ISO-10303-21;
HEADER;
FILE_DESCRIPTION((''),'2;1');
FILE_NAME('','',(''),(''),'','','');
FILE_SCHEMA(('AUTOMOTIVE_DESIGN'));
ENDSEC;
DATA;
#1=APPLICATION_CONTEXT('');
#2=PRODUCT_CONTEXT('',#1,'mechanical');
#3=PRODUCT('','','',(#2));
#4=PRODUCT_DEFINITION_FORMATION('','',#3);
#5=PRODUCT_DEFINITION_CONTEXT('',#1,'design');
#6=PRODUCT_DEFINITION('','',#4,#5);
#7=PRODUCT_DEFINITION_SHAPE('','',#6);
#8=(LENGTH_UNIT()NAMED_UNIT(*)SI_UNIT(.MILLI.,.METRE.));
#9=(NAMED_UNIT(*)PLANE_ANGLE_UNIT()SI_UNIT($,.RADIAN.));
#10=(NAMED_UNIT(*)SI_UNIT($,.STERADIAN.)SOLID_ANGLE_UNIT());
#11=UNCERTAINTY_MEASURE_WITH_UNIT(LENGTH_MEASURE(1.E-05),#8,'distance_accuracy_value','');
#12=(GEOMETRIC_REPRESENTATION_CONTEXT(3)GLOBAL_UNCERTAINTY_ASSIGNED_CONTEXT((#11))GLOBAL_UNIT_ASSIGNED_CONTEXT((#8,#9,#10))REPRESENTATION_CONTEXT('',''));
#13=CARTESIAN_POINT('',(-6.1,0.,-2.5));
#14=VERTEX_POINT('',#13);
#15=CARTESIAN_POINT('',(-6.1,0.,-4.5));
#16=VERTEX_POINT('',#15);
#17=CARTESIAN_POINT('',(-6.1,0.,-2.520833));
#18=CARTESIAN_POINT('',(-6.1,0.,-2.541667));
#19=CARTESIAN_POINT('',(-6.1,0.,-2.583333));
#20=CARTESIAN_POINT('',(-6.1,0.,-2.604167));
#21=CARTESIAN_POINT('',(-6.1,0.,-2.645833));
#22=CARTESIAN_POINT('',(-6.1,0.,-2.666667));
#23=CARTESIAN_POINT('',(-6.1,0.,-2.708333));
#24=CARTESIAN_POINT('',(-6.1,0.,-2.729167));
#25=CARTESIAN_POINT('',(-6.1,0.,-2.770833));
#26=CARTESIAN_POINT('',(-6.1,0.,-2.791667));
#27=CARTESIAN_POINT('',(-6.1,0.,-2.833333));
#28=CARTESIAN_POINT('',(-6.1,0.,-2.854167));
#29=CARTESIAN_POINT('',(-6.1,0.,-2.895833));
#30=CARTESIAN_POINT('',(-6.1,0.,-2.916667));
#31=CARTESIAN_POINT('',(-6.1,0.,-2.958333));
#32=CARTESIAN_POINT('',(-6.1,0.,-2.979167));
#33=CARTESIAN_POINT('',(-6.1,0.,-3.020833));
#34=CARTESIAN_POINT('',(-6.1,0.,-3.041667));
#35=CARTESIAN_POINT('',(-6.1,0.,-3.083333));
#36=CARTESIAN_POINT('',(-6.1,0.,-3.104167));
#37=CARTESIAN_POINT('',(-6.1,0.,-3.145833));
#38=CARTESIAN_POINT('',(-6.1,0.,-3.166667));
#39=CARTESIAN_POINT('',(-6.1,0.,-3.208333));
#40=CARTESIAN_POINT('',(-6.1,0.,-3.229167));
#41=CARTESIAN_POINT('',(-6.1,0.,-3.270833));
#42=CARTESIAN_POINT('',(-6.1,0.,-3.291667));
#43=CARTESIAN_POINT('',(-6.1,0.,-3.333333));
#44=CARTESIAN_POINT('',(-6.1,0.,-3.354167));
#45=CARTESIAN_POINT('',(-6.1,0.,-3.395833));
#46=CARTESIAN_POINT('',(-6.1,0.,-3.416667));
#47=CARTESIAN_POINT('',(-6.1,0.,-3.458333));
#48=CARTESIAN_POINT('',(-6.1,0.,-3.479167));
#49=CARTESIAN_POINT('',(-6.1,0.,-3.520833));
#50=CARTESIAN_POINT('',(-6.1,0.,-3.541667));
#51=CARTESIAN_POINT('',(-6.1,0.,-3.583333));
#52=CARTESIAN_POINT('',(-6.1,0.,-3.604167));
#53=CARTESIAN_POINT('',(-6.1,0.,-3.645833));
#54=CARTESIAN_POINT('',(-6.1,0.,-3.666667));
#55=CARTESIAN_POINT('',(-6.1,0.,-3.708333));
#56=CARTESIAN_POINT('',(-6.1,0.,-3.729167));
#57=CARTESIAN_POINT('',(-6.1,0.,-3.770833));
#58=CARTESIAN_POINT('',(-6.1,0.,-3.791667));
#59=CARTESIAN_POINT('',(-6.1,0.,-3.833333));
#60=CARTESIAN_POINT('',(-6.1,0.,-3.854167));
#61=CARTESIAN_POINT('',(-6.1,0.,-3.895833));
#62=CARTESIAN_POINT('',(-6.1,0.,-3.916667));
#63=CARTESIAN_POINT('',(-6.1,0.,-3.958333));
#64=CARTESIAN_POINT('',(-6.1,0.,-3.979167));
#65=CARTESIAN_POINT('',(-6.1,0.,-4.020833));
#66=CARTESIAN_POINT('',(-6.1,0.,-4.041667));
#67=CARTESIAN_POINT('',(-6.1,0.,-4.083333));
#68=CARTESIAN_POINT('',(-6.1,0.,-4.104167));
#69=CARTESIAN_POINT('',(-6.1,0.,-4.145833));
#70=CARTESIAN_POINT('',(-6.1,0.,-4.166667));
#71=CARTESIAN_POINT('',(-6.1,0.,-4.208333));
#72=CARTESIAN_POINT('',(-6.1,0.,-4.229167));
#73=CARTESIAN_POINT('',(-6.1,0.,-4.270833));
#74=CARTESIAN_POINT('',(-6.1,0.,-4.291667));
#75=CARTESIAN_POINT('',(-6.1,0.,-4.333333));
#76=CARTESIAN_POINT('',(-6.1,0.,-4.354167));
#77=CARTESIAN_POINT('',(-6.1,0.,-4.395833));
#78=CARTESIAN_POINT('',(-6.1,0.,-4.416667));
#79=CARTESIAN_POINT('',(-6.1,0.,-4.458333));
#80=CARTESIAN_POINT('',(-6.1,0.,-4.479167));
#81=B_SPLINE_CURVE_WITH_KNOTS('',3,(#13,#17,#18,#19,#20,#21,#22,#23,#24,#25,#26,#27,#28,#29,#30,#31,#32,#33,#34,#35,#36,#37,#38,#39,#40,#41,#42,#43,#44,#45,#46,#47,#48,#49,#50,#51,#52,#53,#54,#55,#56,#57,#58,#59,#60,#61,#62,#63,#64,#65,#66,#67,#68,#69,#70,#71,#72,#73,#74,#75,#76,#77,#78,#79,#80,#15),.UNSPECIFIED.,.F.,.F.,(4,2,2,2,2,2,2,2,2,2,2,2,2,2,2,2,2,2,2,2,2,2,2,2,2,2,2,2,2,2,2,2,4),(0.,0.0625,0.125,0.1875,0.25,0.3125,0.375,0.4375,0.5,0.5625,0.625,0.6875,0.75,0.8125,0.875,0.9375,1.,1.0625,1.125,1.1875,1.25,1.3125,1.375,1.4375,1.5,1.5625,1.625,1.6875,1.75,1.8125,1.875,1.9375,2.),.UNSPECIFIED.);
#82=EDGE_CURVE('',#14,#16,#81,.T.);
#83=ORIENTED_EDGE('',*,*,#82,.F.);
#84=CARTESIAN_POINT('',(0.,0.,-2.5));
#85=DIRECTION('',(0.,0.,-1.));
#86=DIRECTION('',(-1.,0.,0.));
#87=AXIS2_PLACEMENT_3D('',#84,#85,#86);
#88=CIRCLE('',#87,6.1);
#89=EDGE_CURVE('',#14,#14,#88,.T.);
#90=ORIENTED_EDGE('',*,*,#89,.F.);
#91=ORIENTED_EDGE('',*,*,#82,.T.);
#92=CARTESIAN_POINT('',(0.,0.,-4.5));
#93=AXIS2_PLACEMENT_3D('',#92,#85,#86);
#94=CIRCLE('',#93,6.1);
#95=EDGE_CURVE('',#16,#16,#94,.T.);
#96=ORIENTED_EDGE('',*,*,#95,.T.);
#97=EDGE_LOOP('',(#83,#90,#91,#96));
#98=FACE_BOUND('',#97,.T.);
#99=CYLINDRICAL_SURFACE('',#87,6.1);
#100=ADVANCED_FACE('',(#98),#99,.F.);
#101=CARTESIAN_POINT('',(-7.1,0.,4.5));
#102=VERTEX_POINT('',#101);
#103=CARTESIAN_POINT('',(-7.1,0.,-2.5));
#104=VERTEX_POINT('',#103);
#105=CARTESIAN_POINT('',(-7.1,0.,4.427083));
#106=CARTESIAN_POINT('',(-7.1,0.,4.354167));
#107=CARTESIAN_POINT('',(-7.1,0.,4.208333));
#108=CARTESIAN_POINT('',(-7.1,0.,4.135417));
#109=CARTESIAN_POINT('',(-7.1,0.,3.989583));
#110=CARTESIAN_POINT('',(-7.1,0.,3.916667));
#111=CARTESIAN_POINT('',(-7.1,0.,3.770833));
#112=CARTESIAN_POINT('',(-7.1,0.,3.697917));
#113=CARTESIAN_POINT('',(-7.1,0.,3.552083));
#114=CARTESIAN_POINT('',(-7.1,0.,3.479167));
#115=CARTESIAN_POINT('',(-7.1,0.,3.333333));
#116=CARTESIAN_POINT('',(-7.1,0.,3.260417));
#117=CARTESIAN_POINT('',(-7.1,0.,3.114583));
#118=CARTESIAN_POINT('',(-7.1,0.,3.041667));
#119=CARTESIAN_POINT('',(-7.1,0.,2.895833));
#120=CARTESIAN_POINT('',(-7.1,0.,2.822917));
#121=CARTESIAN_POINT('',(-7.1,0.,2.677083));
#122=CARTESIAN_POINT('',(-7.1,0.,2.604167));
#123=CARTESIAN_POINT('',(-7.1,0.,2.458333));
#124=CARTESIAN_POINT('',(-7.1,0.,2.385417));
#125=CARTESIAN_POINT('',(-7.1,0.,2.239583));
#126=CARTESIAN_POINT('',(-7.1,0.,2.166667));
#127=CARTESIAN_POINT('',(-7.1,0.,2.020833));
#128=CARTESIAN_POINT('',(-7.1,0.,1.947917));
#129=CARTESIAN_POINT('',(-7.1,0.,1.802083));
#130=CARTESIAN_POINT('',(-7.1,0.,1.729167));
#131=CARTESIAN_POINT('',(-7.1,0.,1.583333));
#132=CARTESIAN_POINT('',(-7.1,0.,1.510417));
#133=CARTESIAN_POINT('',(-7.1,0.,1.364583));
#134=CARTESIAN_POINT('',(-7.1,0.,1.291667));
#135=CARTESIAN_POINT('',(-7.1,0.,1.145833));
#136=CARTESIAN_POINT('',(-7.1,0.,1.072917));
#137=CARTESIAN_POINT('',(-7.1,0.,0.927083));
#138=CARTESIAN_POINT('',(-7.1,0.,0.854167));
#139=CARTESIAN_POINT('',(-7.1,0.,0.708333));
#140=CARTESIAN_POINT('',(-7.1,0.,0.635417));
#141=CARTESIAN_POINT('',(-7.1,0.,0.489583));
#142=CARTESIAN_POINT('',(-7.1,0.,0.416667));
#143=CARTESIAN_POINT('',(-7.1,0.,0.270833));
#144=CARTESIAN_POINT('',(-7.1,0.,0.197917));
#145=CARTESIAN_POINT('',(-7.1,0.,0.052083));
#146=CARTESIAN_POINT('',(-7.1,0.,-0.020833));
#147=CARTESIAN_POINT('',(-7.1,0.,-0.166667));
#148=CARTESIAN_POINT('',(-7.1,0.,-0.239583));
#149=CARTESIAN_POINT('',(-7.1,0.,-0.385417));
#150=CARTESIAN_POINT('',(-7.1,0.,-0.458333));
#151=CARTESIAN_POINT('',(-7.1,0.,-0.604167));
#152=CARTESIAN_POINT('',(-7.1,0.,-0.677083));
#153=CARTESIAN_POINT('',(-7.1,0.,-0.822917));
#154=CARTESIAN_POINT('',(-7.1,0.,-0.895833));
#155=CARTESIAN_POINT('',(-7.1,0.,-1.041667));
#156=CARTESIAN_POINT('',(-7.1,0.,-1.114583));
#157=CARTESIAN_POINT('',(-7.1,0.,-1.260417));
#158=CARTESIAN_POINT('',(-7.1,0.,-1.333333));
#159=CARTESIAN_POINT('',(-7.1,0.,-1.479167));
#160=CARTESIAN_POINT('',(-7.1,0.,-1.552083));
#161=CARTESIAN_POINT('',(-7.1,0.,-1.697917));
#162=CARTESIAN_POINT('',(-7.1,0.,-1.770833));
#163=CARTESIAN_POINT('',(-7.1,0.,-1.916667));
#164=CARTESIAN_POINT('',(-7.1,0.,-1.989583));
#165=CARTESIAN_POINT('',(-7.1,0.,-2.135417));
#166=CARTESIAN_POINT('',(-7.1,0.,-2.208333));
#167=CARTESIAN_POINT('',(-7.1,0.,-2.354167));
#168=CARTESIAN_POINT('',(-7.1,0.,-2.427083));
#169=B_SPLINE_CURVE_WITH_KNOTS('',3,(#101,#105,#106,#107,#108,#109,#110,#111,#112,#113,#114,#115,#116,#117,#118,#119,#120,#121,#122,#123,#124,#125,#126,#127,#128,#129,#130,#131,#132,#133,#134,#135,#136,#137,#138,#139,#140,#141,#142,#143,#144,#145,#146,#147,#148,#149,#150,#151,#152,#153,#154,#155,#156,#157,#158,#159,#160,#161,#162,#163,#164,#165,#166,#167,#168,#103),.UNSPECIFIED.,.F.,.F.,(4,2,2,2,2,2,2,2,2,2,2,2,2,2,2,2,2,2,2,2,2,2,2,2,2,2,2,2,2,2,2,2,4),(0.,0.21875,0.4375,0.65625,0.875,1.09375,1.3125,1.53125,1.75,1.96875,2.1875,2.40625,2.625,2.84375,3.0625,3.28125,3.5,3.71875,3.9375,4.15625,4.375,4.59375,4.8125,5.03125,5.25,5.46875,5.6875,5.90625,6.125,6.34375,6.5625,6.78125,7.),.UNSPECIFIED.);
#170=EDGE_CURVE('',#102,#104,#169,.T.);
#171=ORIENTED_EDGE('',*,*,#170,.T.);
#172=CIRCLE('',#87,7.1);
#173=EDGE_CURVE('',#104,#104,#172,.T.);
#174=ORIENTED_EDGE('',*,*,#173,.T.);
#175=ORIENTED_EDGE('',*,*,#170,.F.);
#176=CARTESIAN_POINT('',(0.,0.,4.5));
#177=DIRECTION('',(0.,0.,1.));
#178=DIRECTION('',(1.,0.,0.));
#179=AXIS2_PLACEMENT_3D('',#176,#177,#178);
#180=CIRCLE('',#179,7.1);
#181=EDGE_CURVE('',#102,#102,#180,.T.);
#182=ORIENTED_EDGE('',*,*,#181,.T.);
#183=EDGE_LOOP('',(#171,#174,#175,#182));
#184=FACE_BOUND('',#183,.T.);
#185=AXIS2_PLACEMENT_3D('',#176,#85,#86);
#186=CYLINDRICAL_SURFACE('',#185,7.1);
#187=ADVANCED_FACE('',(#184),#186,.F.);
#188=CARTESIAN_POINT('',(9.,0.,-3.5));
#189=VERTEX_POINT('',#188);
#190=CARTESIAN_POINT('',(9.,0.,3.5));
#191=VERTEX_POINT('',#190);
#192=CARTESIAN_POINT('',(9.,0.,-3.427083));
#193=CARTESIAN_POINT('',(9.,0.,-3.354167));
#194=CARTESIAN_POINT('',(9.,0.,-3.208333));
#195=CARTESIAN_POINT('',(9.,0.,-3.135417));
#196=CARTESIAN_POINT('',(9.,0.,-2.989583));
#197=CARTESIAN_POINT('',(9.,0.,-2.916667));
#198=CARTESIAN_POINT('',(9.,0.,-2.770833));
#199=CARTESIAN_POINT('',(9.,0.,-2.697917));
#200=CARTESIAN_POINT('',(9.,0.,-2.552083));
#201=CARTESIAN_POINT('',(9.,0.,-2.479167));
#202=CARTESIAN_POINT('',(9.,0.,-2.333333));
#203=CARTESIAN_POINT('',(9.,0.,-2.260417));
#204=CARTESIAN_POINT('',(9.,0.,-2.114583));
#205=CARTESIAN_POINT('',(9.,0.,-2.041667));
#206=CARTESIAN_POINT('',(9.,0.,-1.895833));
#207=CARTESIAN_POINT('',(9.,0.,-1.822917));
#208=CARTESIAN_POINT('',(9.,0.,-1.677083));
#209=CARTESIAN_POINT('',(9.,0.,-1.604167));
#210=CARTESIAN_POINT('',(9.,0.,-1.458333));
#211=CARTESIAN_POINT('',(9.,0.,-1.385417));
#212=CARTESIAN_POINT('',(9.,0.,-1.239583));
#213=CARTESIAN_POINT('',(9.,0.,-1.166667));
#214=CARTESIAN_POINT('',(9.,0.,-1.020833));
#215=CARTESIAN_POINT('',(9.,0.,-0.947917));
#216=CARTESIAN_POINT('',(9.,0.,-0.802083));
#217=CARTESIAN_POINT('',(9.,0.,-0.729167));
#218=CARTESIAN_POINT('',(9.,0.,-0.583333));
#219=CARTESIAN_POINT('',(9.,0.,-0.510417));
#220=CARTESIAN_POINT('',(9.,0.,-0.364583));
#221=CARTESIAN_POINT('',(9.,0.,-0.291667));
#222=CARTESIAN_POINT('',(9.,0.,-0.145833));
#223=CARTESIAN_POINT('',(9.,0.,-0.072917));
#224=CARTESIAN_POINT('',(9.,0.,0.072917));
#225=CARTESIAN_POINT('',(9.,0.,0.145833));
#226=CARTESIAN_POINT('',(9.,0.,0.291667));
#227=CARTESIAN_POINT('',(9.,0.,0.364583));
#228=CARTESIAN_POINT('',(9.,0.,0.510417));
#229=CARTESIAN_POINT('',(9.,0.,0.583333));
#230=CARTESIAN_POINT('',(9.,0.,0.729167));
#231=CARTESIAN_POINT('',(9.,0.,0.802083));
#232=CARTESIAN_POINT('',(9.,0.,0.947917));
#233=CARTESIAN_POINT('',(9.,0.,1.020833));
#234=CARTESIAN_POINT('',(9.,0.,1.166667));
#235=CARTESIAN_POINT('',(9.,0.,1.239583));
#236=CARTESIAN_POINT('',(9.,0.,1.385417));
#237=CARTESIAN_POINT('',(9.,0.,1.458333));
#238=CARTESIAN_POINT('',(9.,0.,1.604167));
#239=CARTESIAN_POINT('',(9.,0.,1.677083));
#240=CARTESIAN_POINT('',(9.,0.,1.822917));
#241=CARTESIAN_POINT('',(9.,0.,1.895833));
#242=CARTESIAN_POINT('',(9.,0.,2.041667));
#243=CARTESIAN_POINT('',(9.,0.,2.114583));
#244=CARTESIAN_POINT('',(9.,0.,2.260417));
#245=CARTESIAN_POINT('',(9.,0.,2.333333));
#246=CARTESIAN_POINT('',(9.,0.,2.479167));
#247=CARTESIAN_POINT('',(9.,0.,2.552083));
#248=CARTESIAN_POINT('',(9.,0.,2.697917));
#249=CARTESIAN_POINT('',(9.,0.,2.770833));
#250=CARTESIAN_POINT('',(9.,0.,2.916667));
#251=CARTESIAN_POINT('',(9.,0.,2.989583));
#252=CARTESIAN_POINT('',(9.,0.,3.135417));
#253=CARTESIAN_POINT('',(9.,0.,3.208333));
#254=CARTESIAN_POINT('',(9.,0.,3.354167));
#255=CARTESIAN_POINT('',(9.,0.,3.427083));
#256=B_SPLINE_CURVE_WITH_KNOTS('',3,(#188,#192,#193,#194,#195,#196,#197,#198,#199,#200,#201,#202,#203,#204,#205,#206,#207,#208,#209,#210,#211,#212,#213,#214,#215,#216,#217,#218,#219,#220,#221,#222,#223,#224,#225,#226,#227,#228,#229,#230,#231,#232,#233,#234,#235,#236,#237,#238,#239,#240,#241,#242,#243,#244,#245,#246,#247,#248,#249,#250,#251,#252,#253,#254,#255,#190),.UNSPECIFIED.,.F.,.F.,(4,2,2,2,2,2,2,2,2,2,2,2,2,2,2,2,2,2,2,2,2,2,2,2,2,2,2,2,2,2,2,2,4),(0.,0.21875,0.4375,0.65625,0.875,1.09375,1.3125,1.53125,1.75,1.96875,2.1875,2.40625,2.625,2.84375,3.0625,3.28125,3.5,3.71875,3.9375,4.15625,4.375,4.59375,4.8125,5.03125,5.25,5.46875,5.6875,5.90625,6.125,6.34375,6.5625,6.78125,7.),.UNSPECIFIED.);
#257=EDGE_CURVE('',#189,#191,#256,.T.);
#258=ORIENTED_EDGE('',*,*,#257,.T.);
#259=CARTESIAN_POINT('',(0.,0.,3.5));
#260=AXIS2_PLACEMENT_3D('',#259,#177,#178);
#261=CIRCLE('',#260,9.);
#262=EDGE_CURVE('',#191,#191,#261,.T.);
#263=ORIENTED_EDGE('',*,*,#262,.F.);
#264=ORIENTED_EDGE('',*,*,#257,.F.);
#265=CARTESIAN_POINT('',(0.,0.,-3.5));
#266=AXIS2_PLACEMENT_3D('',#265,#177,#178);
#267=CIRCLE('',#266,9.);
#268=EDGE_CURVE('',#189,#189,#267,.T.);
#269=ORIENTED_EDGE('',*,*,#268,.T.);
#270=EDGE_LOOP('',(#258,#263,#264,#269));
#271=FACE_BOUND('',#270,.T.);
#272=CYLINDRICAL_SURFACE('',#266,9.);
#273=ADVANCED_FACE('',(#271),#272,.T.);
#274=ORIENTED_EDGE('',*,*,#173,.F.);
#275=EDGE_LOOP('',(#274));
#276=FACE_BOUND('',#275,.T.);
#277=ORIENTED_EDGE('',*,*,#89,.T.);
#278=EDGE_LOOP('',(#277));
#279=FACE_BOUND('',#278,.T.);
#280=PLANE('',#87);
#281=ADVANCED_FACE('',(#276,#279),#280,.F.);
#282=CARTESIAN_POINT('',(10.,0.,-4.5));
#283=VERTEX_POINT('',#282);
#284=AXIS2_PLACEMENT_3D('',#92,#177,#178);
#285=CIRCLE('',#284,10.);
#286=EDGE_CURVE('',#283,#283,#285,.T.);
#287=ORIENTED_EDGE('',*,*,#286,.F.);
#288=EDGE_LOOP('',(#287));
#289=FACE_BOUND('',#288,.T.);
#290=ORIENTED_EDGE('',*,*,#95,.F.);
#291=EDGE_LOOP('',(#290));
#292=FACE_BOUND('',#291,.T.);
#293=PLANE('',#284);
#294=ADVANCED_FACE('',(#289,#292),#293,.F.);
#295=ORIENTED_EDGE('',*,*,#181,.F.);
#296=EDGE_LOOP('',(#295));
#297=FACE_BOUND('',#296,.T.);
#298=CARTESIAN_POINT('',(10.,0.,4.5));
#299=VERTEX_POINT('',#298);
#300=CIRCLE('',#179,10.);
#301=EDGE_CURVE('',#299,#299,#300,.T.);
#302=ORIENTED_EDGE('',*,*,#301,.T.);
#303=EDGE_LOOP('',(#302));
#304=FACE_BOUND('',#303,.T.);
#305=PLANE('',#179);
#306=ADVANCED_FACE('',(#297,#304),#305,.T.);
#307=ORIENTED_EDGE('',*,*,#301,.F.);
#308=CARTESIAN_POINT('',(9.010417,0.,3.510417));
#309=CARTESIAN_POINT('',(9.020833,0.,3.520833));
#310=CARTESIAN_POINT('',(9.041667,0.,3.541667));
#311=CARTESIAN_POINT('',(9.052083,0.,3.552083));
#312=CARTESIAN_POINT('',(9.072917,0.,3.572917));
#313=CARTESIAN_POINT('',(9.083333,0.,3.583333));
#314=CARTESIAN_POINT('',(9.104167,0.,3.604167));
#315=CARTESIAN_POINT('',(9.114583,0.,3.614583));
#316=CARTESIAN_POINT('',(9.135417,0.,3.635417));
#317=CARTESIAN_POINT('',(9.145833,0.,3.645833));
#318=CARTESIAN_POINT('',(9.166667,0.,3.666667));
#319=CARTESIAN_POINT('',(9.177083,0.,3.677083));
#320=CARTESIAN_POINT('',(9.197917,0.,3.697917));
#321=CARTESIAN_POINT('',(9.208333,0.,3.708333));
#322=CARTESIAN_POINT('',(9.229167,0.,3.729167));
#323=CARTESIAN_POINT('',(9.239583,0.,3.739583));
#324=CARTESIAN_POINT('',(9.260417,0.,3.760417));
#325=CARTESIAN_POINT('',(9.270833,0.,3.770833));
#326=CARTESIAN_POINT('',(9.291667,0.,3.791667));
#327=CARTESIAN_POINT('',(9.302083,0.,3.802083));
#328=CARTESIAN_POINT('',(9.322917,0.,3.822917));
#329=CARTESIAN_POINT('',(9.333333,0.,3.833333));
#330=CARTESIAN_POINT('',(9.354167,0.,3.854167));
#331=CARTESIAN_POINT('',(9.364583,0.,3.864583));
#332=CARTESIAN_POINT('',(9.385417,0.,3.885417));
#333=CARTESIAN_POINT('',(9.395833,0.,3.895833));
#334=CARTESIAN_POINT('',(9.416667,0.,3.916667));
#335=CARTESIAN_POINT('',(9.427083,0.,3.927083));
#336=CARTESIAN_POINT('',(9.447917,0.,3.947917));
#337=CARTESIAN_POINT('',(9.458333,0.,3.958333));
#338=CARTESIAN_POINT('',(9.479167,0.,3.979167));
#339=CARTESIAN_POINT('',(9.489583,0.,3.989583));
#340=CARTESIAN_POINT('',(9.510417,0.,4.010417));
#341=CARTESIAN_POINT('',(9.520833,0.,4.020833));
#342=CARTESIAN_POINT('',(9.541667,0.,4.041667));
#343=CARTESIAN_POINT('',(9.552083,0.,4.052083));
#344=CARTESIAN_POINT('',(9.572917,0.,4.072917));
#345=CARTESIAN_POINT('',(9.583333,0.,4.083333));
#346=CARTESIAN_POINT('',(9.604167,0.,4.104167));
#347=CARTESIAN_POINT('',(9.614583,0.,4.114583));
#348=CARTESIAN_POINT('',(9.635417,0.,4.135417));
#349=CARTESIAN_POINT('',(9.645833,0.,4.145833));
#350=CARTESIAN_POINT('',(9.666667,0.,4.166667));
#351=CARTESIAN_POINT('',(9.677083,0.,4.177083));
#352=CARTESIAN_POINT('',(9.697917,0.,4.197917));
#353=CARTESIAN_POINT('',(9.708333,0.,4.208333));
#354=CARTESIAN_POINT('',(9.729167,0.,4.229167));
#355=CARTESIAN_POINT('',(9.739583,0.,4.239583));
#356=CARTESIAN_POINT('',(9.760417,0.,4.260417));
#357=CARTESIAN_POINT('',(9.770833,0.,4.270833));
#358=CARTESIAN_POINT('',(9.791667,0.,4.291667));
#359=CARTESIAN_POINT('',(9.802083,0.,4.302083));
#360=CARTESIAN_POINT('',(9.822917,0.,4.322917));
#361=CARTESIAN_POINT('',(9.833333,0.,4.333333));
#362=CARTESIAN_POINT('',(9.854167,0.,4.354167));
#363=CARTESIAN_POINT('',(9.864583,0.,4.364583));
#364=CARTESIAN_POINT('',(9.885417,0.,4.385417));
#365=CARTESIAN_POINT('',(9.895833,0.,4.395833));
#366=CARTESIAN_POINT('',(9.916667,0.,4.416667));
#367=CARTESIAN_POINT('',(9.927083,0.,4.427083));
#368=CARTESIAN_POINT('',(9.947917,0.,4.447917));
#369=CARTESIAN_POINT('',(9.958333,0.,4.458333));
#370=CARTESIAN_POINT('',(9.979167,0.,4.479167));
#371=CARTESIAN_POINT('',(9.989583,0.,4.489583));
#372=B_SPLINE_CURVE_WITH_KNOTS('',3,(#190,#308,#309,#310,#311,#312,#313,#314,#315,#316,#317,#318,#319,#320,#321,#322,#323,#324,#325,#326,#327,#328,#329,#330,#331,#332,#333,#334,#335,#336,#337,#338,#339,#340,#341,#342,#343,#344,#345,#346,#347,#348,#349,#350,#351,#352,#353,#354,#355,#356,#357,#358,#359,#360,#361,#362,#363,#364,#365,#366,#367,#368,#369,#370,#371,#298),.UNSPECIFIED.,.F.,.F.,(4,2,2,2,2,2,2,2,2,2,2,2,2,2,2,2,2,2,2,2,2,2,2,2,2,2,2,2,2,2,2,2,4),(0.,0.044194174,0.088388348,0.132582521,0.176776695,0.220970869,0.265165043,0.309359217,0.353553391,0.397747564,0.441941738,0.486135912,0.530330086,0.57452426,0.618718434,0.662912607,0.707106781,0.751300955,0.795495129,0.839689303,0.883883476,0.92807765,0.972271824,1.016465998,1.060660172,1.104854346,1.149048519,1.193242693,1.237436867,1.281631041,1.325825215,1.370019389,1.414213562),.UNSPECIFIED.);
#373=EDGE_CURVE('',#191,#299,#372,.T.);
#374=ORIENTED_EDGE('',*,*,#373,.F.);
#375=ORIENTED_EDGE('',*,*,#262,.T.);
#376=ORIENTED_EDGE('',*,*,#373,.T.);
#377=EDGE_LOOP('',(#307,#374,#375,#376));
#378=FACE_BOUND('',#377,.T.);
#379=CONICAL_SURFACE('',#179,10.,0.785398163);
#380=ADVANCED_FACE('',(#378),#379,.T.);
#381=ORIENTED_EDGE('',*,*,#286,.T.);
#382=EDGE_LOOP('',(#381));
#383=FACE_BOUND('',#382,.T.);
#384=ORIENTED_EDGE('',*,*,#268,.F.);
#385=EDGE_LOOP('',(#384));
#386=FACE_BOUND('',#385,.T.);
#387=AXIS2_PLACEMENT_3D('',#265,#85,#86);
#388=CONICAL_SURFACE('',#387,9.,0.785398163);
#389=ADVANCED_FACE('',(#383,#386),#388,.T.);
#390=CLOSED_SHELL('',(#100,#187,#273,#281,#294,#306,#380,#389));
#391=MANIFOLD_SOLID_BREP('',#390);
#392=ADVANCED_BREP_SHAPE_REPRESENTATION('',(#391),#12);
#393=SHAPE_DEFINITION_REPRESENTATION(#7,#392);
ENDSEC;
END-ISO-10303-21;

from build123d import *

# Parameters (mm, degrees)
SKETCH1_R           = 10
SKETCH1_R_2         = 9
SKETCH1_R_3         = 7.1
BOSS_EXTRUDE1_DEPTH = 4.5
SKETCH1_3_R         = 10
SKETCH1_3_R_2       = 9
CUT_EXTRUDE1_DEPTH  = 3.5
CHAMFER1_SIZE       = 1
SKETCH2_R           = 7.1
SKETCH2_R_2         = 6.1
BOSS_EXTRUDE2_DEPTH = 2


with BuildPart() as part:
    # Sketch1 → Boss-Extrude1 (new, symmetric)
    # profile 1 of 2: a face of its own
    with BuildSketch(Plane.XY):
        Circle(SKETCH1_R)
        Circle(SKETCH1_R_2, mode=Mode.SUBTRACT)
    # profile 2 of 2: a face of its own
    with BuildSketch(Plane.XY):
        Circle(SKETCH1_R_2)
        Circle(SKETCH1_R_3, mode=Mode.SUBTRACT)
    extrude(amount=BOSS_EXTRUDE1_DEPTH, both=True)

    # Sketch1<3> → Cut-Extrude1 (cut, symmetric)
    with BuildSketch(Plane.XY):
        Circle(SKETCH1_3_R)
        Circle(SKETCH1_3_R_2, mode=Mode.SUBTRACT)
    extrude(amount=CUT_EXTRUDE1_DEPTH, both=True, mode=Mode.SUBTRACT)

    # Chamfer1
    chamfer1_edges = [part.edges().sort_by_distance(p)[0] for p in [
        (-10, 0, -3.5),
        (-10, 0, 3.5),
    ]]
    chamfer(chamfer1_edges, length=CHAMFER1_SIZE - 0.0001)  # a hair under: the kernel refuses the full size

    # Sketch2 → Boss-Extrude2 (add)
    with BuildSketch(Plane(origin=(0, 0, -4.5), x_dir=(-1, 0, 0), z_dir=(0, 0, -1))):
        Circle(SKETCH2_R)
        Circle(SKETCH2_R_2, mode=Mode.SUBTRACT)
    extrude(amount=-BOSS_EXTRUDE2_DEPTH)


solid = part.part
